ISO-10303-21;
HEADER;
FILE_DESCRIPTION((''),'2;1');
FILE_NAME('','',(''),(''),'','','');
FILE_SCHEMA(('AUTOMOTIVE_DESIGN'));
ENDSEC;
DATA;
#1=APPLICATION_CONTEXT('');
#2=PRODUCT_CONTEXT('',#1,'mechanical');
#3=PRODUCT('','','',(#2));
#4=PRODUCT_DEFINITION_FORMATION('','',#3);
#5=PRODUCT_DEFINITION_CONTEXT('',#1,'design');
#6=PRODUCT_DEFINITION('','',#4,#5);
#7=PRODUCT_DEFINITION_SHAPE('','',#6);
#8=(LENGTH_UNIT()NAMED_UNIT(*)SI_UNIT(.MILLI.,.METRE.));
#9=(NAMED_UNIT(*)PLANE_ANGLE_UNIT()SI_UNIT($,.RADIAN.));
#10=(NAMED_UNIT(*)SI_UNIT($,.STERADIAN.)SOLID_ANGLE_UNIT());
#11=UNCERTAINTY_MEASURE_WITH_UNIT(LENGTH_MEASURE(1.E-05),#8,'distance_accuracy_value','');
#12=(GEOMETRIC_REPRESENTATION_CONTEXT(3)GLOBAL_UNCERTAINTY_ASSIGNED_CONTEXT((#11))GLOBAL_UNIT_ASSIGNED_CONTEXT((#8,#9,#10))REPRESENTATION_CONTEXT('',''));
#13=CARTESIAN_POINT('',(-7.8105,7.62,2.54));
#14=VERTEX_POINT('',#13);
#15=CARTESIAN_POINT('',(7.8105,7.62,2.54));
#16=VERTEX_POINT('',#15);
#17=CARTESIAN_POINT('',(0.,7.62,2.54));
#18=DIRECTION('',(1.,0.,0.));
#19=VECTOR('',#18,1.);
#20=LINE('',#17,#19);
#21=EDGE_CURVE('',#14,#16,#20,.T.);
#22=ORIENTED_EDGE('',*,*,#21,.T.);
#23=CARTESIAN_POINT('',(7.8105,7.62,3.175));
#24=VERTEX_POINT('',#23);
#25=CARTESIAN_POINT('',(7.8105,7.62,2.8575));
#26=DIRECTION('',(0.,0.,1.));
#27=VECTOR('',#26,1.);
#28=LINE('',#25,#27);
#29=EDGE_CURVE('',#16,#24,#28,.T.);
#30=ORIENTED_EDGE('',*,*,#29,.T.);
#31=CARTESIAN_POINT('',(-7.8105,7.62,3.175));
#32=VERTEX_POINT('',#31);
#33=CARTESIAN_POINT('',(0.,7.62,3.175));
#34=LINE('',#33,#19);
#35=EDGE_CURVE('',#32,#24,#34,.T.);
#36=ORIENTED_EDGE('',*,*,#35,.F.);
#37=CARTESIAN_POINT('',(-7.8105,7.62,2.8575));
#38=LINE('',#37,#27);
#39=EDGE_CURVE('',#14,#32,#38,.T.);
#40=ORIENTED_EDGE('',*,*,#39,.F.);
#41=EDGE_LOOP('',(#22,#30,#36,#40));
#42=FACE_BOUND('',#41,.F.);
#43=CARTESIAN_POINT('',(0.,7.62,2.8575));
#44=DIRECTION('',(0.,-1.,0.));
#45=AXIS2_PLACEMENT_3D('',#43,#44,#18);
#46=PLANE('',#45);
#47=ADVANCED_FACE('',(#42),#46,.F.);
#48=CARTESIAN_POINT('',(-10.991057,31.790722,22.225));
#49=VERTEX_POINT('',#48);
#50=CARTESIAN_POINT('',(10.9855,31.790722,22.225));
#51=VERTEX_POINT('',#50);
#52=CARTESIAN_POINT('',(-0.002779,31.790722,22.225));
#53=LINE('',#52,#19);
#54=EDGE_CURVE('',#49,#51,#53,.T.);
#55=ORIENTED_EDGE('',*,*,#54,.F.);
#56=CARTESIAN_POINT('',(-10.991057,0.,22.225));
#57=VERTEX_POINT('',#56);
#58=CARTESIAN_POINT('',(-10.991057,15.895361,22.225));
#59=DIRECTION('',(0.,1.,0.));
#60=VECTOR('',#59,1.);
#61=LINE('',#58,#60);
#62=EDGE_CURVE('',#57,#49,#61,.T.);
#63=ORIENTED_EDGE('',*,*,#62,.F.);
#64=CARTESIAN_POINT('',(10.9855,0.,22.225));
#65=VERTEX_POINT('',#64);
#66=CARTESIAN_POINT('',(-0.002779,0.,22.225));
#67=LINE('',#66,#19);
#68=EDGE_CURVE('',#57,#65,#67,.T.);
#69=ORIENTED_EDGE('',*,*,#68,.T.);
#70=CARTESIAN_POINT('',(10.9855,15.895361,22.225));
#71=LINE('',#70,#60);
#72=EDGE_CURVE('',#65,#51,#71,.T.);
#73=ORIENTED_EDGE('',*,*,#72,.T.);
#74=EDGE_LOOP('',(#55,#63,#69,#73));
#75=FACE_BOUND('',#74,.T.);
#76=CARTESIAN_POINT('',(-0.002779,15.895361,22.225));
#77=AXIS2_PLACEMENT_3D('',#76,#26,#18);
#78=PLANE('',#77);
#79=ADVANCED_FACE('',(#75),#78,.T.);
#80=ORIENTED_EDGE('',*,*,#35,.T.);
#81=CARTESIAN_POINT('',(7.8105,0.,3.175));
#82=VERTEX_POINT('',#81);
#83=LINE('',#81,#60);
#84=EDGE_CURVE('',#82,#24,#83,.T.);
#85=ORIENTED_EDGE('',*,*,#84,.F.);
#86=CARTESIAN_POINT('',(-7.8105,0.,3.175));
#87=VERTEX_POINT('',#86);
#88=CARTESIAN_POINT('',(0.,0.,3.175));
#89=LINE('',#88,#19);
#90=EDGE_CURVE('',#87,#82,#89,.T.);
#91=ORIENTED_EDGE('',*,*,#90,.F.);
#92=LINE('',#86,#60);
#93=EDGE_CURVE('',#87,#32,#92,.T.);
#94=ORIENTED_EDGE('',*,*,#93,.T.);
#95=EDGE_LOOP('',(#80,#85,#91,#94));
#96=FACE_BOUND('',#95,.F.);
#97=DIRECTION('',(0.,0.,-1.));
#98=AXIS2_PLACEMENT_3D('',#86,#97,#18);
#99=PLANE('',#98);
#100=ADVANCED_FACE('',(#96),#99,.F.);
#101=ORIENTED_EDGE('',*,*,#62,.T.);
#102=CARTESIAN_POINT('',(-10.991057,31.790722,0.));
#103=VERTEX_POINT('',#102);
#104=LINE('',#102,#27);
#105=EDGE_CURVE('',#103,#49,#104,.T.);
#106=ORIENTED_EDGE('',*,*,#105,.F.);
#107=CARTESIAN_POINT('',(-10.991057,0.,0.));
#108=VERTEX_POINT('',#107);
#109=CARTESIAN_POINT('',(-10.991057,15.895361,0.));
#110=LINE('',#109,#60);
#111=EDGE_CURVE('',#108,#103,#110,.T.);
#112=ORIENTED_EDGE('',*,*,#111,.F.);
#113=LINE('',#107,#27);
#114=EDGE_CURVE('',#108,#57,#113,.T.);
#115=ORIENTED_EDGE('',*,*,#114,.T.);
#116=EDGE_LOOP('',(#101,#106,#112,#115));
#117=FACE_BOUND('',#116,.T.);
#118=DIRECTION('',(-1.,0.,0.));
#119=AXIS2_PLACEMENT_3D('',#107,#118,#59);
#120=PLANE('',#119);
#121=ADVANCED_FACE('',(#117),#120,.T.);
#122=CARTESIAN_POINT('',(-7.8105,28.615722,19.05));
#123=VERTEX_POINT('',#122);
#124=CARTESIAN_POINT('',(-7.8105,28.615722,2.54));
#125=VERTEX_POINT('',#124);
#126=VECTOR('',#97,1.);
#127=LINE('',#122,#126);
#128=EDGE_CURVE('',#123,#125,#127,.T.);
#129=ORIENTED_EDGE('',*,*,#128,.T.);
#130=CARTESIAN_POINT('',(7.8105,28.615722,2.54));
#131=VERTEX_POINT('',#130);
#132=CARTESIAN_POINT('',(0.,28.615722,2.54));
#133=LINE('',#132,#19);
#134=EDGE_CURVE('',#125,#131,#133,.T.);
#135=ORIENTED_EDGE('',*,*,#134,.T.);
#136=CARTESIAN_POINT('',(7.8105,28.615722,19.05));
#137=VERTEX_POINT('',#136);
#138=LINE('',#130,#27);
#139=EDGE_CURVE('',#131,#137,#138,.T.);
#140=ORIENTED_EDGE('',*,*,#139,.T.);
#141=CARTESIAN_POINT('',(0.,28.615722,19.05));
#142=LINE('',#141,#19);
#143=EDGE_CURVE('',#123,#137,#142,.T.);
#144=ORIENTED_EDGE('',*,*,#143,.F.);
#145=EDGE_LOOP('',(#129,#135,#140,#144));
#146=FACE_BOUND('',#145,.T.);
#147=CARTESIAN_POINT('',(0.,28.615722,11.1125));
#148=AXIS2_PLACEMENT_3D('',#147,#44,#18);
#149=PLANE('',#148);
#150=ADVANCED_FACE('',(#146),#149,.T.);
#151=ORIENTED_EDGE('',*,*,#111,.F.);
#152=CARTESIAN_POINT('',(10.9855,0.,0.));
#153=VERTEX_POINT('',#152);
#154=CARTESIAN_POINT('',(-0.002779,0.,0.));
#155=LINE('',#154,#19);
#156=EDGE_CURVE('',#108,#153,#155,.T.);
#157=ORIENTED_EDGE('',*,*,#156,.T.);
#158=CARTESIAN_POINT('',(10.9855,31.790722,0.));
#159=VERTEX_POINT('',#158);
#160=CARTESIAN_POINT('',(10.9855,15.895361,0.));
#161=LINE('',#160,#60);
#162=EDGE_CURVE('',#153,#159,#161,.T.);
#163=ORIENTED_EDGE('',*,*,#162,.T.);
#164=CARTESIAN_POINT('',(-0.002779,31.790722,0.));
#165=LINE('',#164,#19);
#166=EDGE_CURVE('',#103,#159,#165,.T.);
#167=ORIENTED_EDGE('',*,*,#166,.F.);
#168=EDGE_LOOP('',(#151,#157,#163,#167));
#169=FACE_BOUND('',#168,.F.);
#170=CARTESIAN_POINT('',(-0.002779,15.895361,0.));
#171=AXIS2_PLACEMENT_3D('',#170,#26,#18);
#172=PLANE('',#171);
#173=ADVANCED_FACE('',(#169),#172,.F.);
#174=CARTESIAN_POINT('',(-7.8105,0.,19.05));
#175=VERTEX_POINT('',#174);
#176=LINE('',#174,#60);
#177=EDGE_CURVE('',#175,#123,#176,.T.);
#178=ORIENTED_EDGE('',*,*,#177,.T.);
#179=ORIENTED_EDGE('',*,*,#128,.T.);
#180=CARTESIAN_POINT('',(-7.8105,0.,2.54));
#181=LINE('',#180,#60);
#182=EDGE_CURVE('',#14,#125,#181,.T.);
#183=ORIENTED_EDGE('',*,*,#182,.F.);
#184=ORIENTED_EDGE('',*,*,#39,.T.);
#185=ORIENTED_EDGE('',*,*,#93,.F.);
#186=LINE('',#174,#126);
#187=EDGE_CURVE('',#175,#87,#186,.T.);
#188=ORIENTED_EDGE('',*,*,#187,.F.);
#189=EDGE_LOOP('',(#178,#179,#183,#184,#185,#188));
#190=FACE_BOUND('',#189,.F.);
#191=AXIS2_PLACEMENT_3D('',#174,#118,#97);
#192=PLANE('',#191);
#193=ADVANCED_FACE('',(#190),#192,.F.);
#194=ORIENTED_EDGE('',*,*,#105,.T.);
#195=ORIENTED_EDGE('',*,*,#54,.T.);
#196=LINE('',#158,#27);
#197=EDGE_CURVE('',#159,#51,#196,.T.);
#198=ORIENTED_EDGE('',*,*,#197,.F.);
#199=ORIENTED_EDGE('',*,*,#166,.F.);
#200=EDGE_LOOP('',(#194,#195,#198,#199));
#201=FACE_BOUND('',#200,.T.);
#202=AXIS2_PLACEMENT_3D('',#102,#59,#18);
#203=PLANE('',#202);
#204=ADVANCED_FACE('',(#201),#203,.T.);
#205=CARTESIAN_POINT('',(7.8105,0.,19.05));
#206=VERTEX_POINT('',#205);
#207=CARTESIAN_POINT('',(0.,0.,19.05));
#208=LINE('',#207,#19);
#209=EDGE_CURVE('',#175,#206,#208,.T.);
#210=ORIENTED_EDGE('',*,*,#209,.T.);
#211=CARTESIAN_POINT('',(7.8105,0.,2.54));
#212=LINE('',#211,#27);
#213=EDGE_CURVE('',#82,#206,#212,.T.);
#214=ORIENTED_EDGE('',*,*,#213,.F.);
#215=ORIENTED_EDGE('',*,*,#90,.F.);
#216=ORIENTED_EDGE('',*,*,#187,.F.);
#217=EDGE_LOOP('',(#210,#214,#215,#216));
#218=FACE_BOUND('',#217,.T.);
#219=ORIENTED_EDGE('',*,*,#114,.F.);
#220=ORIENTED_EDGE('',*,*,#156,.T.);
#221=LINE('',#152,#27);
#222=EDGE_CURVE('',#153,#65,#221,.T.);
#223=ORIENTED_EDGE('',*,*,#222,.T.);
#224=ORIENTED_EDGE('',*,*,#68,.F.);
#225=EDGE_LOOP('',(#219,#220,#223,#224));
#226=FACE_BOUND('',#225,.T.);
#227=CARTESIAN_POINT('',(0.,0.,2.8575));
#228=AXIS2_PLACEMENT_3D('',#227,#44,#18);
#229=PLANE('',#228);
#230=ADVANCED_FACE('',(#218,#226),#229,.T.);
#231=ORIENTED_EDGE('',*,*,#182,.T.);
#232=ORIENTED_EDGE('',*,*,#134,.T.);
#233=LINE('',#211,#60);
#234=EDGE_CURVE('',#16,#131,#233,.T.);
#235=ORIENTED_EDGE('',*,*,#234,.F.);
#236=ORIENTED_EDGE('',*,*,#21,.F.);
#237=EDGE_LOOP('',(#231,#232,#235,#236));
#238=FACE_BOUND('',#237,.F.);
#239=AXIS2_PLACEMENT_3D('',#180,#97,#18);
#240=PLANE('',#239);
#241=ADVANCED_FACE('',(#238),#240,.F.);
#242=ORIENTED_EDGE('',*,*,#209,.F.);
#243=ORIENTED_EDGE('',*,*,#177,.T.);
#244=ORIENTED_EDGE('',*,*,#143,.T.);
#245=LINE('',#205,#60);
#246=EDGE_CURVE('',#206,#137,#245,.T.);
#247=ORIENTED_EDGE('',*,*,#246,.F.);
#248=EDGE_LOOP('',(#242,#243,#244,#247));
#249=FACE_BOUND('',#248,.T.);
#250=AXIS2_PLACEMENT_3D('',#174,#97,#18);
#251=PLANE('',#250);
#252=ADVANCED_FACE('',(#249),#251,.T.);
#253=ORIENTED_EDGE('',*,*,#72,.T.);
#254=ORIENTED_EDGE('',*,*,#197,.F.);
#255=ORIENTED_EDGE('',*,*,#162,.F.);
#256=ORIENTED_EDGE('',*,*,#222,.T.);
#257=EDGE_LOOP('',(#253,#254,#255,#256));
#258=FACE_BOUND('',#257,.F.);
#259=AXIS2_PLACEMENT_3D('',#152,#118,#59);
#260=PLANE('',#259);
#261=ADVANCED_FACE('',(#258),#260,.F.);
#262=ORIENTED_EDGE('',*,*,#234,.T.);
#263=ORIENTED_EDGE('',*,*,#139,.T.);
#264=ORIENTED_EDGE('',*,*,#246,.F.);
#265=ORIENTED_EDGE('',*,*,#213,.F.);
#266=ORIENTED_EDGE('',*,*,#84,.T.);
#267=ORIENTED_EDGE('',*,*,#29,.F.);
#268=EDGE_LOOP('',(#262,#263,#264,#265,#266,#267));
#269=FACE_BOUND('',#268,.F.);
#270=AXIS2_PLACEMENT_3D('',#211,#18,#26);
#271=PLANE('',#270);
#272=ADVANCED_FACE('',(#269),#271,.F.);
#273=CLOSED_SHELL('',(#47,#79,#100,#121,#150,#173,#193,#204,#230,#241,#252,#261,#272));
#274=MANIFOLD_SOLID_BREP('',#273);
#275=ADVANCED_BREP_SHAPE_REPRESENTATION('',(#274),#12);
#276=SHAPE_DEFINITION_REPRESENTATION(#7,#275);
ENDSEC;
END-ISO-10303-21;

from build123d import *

# Parameters (mm, degrees)
F2_W     = 21.976557381
F2_H     = 31.7907221615
F3_DEPTH = 22.225
F1_W     = 15.621
F1_H     = 15.875
F1_H_2   = 0.635
F4_DEPTH = 28.6157221615
F5_DEPTH = 7.62


with BuildPart() as f3:
    # F2 (on Top) → F3 (new body)
    with BuildSketch(Plane.XY):
        with Locations((-0.0027786905, 15.8953610808)):
            Rectangle(F2_W, F2_H)
    extrude(amount=F3_DEPTH)

    # F1 (on Front) → F4 (cut, through all)
    with BuildSketch(Plane.XZ):
        with Locations((0, 11.1125)):
            Rectangle(F1_W, F1_H)
        with Locations((0, 2.8575)):
            Rectangle(F1_W, F1_H_2)
    extrude(amount=-F4_DEPTH, mode=Mode.SUBTRACT)

    # F1 (on Front) → F5 (join)
    with BuildSketch(Plane.XZ):
        with Locations((0, 2.8575)):
            Rectangle(F1_W, F1_H_2)
    extrude(amount=-F5_DEPTH)


solid = f3.part
